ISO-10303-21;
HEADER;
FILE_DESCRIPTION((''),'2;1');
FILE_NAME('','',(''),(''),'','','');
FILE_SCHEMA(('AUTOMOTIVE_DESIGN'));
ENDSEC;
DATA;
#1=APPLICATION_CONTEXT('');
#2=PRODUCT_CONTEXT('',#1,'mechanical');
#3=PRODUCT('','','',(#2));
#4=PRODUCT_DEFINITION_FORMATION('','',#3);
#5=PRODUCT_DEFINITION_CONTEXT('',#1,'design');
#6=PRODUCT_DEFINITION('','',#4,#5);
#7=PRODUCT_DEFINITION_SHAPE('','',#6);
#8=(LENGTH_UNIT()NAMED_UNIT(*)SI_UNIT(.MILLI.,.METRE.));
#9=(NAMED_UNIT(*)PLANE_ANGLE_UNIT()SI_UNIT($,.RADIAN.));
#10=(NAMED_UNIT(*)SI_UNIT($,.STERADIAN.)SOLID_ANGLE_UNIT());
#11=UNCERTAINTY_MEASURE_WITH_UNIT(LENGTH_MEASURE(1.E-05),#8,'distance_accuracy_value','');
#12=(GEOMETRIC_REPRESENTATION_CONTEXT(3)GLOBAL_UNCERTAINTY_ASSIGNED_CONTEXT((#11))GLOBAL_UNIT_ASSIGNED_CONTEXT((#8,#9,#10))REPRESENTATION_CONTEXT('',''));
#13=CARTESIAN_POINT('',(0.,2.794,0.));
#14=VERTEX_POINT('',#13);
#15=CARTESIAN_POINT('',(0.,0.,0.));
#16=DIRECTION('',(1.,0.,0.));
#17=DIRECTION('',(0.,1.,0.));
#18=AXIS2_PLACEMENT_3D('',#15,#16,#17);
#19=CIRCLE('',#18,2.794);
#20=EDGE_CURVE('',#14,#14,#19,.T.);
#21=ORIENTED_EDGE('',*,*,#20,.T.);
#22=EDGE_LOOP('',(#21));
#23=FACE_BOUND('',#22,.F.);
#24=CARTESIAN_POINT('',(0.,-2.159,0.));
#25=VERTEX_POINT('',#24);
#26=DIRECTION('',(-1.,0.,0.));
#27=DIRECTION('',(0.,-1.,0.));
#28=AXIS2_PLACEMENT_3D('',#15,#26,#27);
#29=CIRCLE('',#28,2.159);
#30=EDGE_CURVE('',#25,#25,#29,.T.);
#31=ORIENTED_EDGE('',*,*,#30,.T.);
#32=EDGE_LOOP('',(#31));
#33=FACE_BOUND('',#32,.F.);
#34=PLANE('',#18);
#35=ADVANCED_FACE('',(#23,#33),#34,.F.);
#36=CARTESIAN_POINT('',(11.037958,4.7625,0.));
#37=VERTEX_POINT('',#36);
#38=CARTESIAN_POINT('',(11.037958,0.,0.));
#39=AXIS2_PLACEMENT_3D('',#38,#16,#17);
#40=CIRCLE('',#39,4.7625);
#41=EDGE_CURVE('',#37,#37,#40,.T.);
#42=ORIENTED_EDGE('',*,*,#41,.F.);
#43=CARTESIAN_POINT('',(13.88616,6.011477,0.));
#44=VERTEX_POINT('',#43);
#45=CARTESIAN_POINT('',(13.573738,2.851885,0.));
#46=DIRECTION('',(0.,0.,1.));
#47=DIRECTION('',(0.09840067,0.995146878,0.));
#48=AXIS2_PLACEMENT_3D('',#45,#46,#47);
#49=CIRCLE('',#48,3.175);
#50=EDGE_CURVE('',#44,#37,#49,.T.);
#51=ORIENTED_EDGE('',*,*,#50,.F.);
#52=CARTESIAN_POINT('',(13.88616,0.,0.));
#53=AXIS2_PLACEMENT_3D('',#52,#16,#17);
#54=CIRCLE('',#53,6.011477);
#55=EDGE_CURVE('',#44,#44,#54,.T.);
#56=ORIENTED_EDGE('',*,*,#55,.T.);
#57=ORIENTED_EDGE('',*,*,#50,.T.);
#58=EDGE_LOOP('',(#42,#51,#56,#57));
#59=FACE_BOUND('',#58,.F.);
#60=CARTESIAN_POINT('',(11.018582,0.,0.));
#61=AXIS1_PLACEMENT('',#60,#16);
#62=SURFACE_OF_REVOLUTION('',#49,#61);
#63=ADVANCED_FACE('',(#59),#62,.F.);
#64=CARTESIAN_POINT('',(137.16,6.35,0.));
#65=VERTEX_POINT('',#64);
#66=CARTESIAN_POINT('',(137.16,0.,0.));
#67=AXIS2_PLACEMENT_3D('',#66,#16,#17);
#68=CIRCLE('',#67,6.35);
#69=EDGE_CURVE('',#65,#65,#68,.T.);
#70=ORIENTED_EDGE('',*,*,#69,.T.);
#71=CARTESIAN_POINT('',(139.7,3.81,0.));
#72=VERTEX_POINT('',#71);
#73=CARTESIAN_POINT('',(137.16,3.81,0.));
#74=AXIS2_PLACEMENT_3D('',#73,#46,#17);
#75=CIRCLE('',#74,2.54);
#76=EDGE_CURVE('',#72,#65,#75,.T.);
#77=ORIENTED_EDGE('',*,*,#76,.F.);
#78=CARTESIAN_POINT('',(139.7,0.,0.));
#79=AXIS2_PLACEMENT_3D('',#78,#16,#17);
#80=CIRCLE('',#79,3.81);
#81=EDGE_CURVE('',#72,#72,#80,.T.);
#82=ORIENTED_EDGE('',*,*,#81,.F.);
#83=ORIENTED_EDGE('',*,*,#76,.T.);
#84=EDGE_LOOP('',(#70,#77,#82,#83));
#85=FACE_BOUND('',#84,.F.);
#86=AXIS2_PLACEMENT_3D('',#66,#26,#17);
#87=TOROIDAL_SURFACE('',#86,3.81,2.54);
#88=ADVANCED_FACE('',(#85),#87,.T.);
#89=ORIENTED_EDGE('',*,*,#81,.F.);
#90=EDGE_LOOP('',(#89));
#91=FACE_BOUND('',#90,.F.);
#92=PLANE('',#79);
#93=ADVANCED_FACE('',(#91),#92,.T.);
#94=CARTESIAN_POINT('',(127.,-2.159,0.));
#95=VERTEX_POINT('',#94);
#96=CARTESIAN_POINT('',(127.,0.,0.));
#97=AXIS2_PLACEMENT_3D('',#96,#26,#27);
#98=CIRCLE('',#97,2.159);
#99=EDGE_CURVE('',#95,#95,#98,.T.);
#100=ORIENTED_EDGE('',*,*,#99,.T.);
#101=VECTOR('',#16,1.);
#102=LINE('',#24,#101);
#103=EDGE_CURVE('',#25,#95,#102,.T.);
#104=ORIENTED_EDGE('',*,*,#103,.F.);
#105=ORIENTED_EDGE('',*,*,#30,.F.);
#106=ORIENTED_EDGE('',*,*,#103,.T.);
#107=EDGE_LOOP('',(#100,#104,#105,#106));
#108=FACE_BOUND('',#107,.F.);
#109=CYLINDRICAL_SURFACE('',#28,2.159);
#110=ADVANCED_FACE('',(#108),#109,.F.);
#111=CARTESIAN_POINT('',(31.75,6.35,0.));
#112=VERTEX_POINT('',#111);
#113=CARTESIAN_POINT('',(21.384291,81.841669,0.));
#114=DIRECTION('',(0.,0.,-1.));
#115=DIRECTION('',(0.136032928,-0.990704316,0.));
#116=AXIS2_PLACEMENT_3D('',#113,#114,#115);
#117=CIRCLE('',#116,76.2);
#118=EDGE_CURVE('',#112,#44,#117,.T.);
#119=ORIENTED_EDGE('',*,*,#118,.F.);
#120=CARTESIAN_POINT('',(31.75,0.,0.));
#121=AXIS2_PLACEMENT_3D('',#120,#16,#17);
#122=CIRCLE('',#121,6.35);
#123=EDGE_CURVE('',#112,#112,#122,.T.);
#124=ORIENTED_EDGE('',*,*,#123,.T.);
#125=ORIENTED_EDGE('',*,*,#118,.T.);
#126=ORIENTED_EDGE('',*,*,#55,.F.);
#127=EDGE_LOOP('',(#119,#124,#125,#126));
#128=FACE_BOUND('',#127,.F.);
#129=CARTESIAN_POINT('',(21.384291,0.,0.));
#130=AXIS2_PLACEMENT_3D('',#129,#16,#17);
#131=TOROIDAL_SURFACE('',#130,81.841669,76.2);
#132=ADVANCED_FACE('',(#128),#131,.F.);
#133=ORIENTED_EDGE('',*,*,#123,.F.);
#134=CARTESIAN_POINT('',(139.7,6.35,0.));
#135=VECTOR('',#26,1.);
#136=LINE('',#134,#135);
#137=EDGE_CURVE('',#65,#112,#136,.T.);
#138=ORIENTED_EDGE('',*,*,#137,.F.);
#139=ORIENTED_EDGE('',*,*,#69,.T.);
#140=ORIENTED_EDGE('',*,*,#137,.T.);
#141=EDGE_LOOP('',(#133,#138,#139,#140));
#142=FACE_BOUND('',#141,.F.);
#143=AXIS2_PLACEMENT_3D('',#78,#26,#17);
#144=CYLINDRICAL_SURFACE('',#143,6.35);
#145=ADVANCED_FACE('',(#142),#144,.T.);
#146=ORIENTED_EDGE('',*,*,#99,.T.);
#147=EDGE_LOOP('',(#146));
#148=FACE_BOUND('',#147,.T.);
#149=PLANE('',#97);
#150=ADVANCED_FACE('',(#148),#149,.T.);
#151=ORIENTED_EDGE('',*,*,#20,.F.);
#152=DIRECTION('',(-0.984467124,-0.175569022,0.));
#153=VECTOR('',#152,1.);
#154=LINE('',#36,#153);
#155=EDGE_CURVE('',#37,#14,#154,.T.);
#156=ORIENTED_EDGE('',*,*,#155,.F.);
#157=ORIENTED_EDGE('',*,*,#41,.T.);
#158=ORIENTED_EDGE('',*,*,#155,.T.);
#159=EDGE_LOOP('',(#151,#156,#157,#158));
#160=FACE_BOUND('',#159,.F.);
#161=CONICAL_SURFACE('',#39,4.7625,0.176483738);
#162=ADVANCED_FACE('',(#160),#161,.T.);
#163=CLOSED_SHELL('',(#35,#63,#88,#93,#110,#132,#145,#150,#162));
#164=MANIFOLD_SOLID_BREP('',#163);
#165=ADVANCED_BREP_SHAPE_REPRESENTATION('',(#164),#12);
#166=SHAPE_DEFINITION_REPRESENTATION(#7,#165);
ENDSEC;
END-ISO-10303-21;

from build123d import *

# Parameters (mm, degrees)
F2_R     = 2.54
F3_R     = 2.159
F4_DEPTH = 127


# Not quite as in the source:
# - a fillet or chamfer that OpenCascade refuses, or shapes differently, is made with other operations: its cross-section is extruded or revolved along the edge and cut away or added


with BuildPart() as f1:
    # F0 (on Top) → F1 (revolve)
    with BuildSketch(Plane.XY):
        with BuildLine():
            Line((0, 2.794), (0, 0))
            Line((0, 0), (139.7, 0))
            Line((139.7, 0), (139.7, 6.35))
            Line((139.7, 6.35), (31.75, 6.35))
            ThreePointArc((31.75, 6.35), (21.3842908829, 5.6416689079), (11.0185817658, 6.35))
            ThreePointArc((11.0185817658, 6.35), (10.9918000406, 5.5558048596), (11.0379582651, 4.7625))
            Line((11.0379582651, 4.7625), (0, 2.794))
        make_face()
    revolve(axis=Axis((69.85, 0, 0), (1, 0, 0)))

    # F2
    f2_edges = [f1.edges().sort_by_distance(p)[0] for p in [
        (139.7, -6.35, 0),
    ]]
    fillet(f2_edges, radius=F2_R)

    # F3 (on face) → F4 (cut)
    with BuildSketch(Plane(origin=(0, 0, 0), x_dir=(0, -1, 0), z_dir=(-1, 0, 0))):
        Circle(F3_R)
    extrude(amount=-F4_DEPTH, mode=Mode.SUBTRACT)

    # F5: fillet of radius 3.175 on 1 edges, made by hand

    # F5_s1 → F5_t2 (revolve, cut)
    with BuildSketch(Plane.XY):
        with BuildLine():
            ThreePointArc((13.886159803, 6.0114768317), (12.2986630958, 5.7596010622), (11.0379582651, 4.7625))
            Line((11.0379582651, 4.7625), (10.9872426769, 4.8007122901))
            ThreePointArc((10.9872426769, 4.8007122901), (10.9283047702, 5.5550298573), (10.9552829498, 6.3550507327))
            Line((10.9552829498, 6.3550507327), (11.0272198567, 6.4129097241))
            ThreePointArc((11.0272198567, 6.4129097241), (12.4582117618, 6.2302164435), (13.8924082455, 6.0746686585))
            Line((13.8924082455, 6.0746686585), (13.886159803, 6.0114768317))
        make_face()
    revolve(axis=Axis((11.0185817658, 0, 0), (1, 0, 0)), mode=Mode.SUBTRACT)


solid = f1.part
